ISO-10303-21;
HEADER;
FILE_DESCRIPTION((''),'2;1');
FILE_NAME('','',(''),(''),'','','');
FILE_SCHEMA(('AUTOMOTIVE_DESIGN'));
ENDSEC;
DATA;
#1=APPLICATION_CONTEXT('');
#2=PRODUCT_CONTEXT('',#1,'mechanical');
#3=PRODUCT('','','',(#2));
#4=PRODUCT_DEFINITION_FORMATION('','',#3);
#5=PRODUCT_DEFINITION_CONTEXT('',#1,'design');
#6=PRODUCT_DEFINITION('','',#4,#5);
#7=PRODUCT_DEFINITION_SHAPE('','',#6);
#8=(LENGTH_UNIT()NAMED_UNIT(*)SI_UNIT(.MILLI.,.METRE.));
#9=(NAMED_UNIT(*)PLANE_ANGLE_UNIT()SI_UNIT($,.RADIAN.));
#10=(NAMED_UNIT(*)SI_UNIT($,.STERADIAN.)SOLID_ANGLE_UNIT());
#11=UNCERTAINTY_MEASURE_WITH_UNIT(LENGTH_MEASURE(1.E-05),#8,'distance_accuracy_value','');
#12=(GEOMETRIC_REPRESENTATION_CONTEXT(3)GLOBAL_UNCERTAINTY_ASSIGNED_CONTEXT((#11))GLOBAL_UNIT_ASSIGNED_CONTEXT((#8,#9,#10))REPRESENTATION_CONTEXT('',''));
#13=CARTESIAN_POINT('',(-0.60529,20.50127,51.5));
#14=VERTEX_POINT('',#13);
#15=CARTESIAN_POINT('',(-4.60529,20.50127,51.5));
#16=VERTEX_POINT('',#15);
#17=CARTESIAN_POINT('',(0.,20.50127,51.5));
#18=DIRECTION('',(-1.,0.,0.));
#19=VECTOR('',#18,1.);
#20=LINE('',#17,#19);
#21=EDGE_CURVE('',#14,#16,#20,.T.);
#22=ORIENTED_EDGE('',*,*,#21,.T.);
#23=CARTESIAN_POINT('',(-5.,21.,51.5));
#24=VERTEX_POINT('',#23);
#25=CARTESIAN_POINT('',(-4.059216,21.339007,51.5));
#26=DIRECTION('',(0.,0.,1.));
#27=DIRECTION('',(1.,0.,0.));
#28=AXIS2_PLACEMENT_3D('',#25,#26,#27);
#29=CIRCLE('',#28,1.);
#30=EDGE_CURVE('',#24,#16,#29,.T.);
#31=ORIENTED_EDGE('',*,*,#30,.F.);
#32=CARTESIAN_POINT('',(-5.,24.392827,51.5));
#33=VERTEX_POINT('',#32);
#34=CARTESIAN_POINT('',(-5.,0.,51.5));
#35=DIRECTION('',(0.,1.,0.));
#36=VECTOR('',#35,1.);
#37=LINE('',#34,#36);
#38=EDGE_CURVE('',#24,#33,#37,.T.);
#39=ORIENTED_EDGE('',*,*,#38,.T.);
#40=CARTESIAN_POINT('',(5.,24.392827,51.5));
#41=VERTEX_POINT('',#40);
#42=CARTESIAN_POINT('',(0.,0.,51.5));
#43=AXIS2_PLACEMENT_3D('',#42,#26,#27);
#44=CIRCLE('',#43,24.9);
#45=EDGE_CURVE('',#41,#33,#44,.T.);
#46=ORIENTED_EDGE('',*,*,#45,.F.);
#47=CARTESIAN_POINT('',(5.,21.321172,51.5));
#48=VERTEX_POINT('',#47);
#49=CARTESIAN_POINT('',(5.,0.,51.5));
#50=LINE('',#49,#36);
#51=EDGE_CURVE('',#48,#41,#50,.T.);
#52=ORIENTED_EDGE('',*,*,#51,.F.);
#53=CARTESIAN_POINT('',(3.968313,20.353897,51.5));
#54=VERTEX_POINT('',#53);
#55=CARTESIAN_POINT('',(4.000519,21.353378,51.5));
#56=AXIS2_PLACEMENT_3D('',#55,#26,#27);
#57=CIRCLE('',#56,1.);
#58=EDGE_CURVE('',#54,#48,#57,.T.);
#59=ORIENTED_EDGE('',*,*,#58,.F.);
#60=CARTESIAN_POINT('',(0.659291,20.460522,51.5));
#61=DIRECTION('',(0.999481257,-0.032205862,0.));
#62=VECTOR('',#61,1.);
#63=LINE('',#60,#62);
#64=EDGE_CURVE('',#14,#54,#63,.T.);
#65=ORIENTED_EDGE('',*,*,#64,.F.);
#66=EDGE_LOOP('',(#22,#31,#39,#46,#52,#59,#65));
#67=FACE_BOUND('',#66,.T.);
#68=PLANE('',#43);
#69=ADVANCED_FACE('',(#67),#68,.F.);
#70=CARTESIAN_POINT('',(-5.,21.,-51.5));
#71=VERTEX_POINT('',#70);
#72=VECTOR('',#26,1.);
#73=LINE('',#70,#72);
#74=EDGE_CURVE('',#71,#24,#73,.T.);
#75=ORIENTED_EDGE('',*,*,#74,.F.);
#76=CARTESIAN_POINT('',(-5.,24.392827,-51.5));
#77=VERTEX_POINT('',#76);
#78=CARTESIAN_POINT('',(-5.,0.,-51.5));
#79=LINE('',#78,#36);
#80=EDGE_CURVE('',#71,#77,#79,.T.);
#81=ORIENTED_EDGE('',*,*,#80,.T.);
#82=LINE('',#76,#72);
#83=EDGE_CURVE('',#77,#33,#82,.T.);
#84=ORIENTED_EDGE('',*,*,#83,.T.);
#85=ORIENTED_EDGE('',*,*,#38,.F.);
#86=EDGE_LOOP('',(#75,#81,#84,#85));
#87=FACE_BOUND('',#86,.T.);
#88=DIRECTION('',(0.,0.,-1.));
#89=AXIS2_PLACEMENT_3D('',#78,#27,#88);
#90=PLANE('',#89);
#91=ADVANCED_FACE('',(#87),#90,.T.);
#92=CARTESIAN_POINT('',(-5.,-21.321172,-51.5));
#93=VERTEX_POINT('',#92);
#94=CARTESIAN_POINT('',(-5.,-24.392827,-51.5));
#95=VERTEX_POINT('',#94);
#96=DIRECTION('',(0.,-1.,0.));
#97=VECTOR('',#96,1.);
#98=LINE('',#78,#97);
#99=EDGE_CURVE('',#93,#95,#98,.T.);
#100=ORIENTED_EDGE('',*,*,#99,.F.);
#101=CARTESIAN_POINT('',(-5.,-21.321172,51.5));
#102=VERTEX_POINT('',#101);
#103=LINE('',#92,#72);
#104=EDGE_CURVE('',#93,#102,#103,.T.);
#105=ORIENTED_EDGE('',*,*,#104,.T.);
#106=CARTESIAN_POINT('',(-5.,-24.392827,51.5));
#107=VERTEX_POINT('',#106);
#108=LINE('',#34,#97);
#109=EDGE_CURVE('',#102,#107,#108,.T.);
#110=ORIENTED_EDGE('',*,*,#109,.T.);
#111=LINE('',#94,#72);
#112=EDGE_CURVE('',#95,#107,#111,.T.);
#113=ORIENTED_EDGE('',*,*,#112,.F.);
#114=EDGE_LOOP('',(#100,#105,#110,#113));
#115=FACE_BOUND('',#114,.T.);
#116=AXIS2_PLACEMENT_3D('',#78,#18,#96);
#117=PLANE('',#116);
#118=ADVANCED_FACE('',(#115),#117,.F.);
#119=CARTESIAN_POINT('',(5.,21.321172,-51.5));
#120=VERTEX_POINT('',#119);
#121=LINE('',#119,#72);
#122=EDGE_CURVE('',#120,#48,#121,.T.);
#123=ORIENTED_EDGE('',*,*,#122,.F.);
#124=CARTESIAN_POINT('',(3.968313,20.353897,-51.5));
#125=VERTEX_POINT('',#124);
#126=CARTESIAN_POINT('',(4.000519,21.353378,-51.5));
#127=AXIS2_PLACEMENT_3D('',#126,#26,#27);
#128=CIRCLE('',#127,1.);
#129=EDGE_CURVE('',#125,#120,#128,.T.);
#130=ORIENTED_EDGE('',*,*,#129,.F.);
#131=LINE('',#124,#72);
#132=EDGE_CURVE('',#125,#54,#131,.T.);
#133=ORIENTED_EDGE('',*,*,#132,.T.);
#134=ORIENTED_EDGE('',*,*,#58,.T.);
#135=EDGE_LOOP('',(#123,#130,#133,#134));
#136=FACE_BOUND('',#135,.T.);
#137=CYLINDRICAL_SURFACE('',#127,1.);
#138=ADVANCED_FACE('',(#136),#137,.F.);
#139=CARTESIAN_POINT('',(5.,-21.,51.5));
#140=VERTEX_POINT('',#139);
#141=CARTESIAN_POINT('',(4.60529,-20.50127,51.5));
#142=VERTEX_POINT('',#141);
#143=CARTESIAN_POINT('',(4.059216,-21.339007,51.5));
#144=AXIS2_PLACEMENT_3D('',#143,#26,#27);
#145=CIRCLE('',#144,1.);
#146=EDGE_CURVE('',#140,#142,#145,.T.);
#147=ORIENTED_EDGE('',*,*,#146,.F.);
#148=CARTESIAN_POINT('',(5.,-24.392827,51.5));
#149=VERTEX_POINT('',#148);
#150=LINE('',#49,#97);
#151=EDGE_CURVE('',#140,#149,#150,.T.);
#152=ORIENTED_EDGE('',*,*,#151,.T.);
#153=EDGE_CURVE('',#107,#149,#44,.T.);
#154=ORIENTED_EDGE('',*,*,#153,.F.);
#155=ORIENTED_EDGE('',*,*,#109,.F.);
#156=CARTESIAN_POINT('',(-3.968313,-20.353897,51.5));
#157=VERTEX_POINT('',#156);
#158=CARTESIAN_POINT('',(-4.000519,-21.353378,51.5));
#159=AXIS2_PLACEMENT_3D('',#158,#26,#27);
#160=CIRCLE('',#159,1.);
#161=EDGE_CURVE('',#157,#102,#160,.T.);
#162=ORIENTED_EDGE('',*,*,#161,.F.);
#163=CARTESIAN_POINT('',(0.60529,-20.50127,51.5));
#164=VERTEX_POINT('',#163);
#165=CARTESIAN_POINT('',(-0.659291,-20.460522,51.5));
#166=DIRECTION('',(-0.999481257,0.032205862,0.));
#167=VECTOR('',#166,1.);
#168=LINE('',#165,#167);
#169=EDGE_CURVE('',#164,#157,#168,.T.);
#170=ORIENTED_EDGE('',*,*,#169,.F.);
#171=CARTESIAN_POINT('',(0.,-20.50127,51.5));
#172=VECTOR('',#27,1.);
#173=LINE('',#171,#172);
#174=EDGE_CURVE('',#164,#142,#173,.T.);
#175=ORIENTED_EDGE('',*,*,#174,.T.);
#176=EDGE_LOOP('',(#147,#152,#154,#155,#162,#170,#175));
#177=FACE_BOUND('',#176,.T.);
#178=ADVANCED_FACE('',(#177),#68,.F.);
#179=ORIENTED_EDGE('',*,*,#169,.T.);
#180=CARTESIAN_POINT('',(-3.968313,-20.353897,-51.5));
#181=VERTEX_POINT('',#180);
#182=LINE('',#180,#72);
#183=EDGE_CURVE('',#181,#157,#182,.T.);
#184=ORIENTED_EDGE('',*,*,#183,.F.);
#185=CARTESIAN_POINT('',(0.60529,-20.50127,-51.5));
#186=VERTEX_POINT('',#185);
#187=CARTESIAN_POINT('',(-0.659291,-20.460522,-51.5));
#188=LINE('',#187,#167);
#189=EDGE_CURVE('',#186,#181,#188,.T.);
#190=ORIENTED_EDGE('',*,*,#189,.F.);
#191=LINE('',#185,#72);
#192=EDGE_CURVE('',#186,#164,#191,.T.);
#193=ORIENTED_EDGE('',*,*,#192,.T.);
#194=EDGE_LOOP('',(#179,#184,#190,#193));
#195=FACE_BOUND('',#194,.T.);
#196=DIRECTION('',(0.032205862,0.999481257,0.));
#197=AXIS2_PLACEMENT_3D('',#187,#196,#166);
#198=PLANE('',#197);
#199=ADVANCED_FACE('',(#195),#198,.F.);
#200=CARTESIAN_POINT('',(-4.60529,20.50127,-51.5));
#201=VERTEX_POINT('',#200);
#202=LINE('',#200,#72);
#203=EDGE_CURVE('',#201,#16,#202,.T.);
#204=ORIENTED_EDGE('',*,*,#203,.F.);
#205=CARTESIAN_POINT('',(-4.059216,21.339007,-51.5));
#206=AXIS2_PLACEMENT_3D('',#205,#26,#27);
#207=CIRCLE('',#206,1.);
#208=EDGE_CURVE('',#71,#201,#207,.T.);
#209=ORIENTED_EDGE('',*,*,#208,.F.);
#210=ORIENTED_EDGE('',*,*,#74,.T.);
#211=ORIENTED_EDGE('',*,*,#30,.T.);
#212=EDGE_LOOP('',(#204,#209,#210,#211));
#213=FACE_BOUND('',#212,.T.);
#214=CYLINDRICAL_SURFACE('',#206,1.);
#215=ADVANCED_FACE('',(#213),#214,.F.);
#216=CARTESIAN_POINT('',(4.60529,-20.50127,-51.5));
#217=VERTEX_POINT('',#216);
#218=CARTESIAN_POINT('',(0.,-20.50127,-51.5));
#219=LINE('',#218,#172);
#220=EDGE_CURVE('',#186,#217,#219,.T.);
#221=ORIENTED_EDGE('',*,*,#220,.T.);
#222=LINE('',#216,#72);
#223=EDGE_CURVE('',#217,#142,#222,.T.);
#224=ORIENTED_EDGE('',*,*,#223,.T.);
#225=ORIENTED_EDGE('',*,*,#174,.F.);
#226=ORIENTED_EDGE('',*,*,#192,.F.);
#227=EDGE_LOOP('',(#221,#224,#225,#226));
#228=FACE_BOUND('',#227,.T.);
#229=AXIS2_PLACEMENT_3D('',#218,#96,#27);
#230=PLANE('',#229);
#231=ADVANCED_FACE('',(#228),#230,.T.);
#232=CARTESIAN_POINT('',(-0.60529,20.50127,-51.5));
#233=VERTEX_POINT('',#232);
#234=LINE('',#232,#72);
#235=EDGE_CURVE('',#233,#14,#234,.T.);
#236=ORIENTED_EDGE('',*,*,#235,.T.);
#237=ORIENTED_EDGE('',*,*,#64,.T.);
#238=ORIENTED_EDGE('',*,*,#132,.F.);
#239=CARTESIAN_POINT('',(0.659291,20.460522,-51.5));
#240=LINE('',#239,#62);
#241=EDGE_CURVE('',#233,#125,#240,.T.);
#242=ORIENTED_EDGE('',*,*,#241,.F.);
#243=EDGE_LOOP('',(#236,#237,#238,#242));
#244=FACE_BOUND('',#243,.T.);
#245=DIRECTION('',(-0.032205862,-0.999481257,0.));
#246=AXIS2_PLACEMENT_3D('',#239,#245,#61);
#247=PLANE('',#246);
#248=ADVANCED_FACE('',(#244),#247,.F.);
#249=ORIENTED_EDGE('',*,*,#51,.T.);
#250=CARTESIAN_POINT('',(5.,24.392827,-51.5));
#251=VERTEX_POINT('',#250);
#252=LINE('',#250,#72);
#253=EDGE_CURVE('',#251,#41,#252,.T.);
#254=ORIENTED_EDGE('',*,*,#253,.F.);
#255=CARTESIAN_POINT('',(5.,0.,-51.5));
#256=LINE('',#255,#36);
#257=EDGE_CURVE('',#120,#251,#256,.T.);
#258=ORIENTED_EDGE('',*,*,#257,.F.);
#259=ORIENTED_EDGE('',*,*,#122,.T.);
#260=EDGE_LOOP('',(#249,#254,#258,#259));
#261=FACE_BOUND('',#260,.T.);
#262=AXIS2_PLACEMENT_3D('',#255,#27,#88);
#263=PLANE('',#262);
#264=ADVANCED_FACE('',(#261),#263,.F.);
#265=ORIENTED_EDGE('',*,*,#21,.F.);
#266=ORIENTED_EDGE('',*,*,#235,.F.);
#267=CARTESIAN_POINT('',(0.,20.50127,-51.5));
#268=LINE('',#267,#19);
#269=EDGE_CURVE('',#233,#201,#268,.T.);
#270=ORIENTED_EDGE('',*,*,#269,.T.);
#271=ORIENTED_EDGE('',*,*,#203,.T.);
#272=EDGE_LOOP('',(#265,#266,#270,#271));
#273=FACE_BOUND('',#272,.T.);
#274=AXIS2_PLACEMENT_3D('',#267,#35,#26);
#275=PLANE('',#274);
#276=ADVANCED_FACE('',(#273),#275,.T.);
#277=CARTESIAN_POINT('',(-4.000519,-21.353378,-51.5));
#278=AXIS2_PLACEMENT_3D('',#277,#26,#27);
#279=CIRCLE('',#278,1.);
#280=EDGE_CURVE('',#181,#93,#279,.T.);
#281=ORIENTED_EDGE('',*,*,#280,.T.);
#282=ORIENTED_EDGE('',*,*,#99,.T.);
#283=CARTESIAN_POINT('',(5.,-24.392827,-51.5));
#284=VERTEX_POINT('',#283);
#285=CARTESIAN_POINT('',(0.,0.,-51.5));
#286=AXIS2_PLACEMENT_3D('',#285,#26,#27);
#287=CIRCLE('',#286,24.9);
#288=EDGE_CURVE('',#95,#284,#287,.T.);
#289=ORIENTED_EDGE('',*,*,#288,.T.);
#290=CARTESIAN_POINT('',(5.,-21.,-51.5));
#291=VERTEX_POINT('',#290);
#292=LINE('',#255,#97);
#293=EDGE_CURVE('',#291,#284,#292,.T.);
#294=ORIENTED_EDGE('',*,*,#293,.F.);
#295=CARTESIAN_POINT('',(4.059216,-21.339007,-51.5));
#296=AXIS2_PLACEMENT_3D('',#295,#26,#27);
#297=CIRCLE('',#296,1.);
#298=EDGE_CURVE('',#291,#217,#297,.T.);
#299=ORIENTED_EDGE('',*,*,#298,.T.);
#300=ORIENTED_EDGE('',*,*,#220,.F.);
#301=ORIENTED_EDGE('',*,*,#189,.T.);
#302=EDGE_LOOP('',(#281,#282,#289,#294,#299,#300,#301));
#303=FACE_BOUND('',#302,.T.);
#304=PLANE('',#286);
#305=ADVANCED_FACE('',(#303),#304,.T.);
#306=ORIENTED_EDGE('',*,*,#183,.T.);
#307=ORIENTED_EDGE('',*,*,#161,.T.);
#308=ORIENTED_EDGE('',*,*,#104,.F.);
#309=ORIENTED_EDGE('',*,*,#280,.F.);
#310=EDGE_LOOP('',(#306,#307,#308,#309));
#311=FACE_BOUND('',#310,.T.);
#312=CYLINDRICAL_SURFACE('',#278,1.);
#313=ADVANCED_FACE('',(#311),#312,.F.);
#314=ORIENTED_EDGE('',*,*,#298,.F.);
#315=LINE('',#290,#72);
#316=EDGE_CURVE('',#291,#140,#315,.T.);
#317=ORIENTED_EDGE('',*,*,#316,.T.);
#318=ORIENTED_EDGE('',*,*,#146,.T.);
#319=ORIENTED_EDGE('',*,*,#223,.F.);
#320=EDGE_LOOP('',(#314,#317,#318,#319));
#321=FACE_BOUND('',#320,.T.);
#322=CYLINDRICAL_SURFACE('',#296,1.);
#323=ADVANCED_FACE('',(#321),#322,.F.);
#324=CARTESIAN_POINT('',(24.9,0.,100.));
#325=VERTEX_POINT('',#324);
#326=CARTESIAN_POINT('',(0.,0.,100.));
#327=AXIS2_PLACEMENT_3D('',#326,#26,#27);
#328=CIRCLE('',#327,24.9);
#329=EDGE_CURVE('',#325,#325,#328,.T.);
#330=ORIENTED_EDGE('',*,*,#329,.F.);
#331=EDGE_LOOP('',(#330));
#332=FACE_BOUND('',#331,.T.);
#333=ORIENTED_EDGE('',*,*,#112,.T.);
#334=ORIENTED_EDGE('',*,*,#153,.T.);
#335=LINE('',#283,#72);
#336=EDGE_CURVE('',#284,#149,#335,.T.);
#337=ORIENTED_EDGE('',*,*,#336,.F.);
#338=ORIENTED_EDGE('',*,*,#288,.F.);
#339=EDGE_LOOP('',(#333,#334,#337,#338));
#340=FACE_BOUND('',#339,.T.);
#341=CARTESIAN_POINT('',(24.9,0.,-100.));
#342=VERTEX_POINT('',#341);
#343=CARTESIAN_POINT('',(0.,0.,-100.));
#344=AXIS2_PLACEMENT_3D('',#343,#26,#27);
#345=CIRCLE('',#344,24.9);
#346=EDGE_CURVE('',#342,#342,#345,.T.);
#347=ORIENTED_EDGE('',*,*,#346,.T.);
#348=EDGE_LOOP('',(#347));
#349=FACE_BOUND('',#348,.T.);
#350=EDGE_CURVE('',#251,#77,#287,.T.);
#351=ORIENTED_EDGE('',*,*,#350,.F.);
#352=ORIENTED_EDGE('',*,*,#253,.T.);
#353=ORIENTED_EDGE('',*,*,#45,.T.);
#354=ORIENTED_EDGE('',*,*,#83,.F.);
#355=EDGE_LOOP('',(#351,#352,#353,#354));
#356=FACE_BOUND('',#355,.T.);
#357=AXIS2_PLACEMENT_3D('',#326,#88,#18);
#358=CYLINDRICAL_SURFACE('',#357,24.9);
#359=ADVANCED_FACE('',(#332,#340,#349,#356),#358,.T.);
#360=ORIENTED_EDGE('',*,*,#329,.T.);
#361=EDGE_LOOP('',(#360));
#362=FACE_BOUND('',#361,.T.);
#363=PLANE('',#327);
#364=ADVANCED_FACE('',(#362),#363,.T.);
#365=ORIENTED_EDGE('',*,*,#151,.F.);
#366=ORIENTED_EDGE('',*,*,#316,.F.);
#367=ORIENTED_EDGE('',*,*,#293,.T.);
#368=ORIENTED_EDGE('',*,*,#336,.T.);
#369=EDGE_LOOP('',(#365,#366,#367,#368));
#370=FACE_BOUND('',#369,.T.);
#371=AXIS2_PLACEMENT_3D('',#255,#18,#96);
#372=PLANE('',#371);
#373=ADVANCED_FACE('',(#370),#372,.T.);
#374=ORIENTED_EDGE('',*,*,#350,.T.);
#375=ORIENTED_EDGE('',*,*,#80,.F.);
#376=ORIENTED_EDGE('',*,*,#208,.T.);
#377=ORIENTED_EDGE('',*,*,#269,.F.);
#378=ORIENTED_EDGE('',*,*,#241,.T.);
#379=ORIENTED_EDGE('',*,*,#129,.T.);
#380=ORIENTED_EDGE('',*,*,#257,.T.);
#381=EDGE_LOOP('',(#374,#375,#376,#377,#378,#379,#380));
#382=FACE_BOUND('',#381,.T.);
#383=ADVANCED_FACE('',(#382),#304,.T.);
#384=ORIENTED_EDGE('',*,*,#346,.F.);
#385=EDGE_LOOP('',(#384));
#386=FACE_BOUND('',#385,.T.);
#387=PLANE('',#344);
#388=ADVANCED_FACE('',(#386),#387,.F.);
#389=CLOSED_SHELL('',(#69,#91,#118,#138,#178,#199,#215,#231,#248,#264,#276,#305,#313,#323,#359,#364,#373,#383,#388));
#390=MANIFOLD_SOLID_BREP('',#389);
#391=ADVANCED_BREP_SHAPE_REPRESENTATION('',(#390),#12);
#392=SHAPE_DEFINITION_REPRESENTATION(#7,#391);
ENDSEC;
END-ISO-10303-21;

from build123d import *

# Parameters (mm, degrees)
MODEL_R                     = 24.9
Y_KSEKLIK_EKSTR_ZYON2_DEPTH = 100
KES_EKSTR_ZYON1_DEPTH       = 51.5


with BuildPart() as part:
    # Model → Yükseklik-Ekstrüzyon2 (new, symmetric)
    with BuildSketch(Plane.XY):
        Circle(MODEL_R)
    extrude(amount=Y_KSEKLIK_EKSTR_ZYON2_DEPTH, both=True)

    # Model<12> → Kes-Ekstrüzyon1 (cut, symmetric)
    with BuildSketch(Plane.XY):
        with BuildLine():
            Line((5, -24.392826814), (5, -21))
            ThreePointArc((5, -21), (4.843352342, -20.718418144), (4.605290304, -20.501270048))
            Line((4.605290304, -20.501270048), (0.605290304, -20.501270048))
            Line((0.605290304, -20.501270048), (-3.968312881, -20.353896765))
            ThreePointArc((-3.968312881, -20.353896765), (-4.684485734, -20.623865064), (-5, -21.321172159))
            Line((-5, -21.321172159), (-5, -24.392826814))
            ThreePointArc((-5, -24.392826814), (0, -24.9), (5, -24.392826814))
        make_face()
        with BuildLine():
            ThreePointArc((5, 24.392826814), (0, 24.9), (-5, 24.392826814))
            Line((-5, 24.392826814), (-5, 21))
            ThreePointArc((-5, 21), (-4.843352342, 20.718418144), (-4.605290304, 20.501270048))
            Line((-4.605290304, 20.501270048), (-0.605290304, 20.501270048))
            Line((-0.605290304, 20.501270048), (3.968312881, 20.353896765))
            ThreePointArc((3.968312881, 20.353896765), (4.684485734, 20.623865064), (5, 21.321172159))
            Line((5, 21.321172159), (5, 24.392826814))
        make_face()
    extrude(amount=KES_EKSTR_ZYON1_DEPTH, both=True, mode=Mode.SUBTRACT)


solid = part.part
